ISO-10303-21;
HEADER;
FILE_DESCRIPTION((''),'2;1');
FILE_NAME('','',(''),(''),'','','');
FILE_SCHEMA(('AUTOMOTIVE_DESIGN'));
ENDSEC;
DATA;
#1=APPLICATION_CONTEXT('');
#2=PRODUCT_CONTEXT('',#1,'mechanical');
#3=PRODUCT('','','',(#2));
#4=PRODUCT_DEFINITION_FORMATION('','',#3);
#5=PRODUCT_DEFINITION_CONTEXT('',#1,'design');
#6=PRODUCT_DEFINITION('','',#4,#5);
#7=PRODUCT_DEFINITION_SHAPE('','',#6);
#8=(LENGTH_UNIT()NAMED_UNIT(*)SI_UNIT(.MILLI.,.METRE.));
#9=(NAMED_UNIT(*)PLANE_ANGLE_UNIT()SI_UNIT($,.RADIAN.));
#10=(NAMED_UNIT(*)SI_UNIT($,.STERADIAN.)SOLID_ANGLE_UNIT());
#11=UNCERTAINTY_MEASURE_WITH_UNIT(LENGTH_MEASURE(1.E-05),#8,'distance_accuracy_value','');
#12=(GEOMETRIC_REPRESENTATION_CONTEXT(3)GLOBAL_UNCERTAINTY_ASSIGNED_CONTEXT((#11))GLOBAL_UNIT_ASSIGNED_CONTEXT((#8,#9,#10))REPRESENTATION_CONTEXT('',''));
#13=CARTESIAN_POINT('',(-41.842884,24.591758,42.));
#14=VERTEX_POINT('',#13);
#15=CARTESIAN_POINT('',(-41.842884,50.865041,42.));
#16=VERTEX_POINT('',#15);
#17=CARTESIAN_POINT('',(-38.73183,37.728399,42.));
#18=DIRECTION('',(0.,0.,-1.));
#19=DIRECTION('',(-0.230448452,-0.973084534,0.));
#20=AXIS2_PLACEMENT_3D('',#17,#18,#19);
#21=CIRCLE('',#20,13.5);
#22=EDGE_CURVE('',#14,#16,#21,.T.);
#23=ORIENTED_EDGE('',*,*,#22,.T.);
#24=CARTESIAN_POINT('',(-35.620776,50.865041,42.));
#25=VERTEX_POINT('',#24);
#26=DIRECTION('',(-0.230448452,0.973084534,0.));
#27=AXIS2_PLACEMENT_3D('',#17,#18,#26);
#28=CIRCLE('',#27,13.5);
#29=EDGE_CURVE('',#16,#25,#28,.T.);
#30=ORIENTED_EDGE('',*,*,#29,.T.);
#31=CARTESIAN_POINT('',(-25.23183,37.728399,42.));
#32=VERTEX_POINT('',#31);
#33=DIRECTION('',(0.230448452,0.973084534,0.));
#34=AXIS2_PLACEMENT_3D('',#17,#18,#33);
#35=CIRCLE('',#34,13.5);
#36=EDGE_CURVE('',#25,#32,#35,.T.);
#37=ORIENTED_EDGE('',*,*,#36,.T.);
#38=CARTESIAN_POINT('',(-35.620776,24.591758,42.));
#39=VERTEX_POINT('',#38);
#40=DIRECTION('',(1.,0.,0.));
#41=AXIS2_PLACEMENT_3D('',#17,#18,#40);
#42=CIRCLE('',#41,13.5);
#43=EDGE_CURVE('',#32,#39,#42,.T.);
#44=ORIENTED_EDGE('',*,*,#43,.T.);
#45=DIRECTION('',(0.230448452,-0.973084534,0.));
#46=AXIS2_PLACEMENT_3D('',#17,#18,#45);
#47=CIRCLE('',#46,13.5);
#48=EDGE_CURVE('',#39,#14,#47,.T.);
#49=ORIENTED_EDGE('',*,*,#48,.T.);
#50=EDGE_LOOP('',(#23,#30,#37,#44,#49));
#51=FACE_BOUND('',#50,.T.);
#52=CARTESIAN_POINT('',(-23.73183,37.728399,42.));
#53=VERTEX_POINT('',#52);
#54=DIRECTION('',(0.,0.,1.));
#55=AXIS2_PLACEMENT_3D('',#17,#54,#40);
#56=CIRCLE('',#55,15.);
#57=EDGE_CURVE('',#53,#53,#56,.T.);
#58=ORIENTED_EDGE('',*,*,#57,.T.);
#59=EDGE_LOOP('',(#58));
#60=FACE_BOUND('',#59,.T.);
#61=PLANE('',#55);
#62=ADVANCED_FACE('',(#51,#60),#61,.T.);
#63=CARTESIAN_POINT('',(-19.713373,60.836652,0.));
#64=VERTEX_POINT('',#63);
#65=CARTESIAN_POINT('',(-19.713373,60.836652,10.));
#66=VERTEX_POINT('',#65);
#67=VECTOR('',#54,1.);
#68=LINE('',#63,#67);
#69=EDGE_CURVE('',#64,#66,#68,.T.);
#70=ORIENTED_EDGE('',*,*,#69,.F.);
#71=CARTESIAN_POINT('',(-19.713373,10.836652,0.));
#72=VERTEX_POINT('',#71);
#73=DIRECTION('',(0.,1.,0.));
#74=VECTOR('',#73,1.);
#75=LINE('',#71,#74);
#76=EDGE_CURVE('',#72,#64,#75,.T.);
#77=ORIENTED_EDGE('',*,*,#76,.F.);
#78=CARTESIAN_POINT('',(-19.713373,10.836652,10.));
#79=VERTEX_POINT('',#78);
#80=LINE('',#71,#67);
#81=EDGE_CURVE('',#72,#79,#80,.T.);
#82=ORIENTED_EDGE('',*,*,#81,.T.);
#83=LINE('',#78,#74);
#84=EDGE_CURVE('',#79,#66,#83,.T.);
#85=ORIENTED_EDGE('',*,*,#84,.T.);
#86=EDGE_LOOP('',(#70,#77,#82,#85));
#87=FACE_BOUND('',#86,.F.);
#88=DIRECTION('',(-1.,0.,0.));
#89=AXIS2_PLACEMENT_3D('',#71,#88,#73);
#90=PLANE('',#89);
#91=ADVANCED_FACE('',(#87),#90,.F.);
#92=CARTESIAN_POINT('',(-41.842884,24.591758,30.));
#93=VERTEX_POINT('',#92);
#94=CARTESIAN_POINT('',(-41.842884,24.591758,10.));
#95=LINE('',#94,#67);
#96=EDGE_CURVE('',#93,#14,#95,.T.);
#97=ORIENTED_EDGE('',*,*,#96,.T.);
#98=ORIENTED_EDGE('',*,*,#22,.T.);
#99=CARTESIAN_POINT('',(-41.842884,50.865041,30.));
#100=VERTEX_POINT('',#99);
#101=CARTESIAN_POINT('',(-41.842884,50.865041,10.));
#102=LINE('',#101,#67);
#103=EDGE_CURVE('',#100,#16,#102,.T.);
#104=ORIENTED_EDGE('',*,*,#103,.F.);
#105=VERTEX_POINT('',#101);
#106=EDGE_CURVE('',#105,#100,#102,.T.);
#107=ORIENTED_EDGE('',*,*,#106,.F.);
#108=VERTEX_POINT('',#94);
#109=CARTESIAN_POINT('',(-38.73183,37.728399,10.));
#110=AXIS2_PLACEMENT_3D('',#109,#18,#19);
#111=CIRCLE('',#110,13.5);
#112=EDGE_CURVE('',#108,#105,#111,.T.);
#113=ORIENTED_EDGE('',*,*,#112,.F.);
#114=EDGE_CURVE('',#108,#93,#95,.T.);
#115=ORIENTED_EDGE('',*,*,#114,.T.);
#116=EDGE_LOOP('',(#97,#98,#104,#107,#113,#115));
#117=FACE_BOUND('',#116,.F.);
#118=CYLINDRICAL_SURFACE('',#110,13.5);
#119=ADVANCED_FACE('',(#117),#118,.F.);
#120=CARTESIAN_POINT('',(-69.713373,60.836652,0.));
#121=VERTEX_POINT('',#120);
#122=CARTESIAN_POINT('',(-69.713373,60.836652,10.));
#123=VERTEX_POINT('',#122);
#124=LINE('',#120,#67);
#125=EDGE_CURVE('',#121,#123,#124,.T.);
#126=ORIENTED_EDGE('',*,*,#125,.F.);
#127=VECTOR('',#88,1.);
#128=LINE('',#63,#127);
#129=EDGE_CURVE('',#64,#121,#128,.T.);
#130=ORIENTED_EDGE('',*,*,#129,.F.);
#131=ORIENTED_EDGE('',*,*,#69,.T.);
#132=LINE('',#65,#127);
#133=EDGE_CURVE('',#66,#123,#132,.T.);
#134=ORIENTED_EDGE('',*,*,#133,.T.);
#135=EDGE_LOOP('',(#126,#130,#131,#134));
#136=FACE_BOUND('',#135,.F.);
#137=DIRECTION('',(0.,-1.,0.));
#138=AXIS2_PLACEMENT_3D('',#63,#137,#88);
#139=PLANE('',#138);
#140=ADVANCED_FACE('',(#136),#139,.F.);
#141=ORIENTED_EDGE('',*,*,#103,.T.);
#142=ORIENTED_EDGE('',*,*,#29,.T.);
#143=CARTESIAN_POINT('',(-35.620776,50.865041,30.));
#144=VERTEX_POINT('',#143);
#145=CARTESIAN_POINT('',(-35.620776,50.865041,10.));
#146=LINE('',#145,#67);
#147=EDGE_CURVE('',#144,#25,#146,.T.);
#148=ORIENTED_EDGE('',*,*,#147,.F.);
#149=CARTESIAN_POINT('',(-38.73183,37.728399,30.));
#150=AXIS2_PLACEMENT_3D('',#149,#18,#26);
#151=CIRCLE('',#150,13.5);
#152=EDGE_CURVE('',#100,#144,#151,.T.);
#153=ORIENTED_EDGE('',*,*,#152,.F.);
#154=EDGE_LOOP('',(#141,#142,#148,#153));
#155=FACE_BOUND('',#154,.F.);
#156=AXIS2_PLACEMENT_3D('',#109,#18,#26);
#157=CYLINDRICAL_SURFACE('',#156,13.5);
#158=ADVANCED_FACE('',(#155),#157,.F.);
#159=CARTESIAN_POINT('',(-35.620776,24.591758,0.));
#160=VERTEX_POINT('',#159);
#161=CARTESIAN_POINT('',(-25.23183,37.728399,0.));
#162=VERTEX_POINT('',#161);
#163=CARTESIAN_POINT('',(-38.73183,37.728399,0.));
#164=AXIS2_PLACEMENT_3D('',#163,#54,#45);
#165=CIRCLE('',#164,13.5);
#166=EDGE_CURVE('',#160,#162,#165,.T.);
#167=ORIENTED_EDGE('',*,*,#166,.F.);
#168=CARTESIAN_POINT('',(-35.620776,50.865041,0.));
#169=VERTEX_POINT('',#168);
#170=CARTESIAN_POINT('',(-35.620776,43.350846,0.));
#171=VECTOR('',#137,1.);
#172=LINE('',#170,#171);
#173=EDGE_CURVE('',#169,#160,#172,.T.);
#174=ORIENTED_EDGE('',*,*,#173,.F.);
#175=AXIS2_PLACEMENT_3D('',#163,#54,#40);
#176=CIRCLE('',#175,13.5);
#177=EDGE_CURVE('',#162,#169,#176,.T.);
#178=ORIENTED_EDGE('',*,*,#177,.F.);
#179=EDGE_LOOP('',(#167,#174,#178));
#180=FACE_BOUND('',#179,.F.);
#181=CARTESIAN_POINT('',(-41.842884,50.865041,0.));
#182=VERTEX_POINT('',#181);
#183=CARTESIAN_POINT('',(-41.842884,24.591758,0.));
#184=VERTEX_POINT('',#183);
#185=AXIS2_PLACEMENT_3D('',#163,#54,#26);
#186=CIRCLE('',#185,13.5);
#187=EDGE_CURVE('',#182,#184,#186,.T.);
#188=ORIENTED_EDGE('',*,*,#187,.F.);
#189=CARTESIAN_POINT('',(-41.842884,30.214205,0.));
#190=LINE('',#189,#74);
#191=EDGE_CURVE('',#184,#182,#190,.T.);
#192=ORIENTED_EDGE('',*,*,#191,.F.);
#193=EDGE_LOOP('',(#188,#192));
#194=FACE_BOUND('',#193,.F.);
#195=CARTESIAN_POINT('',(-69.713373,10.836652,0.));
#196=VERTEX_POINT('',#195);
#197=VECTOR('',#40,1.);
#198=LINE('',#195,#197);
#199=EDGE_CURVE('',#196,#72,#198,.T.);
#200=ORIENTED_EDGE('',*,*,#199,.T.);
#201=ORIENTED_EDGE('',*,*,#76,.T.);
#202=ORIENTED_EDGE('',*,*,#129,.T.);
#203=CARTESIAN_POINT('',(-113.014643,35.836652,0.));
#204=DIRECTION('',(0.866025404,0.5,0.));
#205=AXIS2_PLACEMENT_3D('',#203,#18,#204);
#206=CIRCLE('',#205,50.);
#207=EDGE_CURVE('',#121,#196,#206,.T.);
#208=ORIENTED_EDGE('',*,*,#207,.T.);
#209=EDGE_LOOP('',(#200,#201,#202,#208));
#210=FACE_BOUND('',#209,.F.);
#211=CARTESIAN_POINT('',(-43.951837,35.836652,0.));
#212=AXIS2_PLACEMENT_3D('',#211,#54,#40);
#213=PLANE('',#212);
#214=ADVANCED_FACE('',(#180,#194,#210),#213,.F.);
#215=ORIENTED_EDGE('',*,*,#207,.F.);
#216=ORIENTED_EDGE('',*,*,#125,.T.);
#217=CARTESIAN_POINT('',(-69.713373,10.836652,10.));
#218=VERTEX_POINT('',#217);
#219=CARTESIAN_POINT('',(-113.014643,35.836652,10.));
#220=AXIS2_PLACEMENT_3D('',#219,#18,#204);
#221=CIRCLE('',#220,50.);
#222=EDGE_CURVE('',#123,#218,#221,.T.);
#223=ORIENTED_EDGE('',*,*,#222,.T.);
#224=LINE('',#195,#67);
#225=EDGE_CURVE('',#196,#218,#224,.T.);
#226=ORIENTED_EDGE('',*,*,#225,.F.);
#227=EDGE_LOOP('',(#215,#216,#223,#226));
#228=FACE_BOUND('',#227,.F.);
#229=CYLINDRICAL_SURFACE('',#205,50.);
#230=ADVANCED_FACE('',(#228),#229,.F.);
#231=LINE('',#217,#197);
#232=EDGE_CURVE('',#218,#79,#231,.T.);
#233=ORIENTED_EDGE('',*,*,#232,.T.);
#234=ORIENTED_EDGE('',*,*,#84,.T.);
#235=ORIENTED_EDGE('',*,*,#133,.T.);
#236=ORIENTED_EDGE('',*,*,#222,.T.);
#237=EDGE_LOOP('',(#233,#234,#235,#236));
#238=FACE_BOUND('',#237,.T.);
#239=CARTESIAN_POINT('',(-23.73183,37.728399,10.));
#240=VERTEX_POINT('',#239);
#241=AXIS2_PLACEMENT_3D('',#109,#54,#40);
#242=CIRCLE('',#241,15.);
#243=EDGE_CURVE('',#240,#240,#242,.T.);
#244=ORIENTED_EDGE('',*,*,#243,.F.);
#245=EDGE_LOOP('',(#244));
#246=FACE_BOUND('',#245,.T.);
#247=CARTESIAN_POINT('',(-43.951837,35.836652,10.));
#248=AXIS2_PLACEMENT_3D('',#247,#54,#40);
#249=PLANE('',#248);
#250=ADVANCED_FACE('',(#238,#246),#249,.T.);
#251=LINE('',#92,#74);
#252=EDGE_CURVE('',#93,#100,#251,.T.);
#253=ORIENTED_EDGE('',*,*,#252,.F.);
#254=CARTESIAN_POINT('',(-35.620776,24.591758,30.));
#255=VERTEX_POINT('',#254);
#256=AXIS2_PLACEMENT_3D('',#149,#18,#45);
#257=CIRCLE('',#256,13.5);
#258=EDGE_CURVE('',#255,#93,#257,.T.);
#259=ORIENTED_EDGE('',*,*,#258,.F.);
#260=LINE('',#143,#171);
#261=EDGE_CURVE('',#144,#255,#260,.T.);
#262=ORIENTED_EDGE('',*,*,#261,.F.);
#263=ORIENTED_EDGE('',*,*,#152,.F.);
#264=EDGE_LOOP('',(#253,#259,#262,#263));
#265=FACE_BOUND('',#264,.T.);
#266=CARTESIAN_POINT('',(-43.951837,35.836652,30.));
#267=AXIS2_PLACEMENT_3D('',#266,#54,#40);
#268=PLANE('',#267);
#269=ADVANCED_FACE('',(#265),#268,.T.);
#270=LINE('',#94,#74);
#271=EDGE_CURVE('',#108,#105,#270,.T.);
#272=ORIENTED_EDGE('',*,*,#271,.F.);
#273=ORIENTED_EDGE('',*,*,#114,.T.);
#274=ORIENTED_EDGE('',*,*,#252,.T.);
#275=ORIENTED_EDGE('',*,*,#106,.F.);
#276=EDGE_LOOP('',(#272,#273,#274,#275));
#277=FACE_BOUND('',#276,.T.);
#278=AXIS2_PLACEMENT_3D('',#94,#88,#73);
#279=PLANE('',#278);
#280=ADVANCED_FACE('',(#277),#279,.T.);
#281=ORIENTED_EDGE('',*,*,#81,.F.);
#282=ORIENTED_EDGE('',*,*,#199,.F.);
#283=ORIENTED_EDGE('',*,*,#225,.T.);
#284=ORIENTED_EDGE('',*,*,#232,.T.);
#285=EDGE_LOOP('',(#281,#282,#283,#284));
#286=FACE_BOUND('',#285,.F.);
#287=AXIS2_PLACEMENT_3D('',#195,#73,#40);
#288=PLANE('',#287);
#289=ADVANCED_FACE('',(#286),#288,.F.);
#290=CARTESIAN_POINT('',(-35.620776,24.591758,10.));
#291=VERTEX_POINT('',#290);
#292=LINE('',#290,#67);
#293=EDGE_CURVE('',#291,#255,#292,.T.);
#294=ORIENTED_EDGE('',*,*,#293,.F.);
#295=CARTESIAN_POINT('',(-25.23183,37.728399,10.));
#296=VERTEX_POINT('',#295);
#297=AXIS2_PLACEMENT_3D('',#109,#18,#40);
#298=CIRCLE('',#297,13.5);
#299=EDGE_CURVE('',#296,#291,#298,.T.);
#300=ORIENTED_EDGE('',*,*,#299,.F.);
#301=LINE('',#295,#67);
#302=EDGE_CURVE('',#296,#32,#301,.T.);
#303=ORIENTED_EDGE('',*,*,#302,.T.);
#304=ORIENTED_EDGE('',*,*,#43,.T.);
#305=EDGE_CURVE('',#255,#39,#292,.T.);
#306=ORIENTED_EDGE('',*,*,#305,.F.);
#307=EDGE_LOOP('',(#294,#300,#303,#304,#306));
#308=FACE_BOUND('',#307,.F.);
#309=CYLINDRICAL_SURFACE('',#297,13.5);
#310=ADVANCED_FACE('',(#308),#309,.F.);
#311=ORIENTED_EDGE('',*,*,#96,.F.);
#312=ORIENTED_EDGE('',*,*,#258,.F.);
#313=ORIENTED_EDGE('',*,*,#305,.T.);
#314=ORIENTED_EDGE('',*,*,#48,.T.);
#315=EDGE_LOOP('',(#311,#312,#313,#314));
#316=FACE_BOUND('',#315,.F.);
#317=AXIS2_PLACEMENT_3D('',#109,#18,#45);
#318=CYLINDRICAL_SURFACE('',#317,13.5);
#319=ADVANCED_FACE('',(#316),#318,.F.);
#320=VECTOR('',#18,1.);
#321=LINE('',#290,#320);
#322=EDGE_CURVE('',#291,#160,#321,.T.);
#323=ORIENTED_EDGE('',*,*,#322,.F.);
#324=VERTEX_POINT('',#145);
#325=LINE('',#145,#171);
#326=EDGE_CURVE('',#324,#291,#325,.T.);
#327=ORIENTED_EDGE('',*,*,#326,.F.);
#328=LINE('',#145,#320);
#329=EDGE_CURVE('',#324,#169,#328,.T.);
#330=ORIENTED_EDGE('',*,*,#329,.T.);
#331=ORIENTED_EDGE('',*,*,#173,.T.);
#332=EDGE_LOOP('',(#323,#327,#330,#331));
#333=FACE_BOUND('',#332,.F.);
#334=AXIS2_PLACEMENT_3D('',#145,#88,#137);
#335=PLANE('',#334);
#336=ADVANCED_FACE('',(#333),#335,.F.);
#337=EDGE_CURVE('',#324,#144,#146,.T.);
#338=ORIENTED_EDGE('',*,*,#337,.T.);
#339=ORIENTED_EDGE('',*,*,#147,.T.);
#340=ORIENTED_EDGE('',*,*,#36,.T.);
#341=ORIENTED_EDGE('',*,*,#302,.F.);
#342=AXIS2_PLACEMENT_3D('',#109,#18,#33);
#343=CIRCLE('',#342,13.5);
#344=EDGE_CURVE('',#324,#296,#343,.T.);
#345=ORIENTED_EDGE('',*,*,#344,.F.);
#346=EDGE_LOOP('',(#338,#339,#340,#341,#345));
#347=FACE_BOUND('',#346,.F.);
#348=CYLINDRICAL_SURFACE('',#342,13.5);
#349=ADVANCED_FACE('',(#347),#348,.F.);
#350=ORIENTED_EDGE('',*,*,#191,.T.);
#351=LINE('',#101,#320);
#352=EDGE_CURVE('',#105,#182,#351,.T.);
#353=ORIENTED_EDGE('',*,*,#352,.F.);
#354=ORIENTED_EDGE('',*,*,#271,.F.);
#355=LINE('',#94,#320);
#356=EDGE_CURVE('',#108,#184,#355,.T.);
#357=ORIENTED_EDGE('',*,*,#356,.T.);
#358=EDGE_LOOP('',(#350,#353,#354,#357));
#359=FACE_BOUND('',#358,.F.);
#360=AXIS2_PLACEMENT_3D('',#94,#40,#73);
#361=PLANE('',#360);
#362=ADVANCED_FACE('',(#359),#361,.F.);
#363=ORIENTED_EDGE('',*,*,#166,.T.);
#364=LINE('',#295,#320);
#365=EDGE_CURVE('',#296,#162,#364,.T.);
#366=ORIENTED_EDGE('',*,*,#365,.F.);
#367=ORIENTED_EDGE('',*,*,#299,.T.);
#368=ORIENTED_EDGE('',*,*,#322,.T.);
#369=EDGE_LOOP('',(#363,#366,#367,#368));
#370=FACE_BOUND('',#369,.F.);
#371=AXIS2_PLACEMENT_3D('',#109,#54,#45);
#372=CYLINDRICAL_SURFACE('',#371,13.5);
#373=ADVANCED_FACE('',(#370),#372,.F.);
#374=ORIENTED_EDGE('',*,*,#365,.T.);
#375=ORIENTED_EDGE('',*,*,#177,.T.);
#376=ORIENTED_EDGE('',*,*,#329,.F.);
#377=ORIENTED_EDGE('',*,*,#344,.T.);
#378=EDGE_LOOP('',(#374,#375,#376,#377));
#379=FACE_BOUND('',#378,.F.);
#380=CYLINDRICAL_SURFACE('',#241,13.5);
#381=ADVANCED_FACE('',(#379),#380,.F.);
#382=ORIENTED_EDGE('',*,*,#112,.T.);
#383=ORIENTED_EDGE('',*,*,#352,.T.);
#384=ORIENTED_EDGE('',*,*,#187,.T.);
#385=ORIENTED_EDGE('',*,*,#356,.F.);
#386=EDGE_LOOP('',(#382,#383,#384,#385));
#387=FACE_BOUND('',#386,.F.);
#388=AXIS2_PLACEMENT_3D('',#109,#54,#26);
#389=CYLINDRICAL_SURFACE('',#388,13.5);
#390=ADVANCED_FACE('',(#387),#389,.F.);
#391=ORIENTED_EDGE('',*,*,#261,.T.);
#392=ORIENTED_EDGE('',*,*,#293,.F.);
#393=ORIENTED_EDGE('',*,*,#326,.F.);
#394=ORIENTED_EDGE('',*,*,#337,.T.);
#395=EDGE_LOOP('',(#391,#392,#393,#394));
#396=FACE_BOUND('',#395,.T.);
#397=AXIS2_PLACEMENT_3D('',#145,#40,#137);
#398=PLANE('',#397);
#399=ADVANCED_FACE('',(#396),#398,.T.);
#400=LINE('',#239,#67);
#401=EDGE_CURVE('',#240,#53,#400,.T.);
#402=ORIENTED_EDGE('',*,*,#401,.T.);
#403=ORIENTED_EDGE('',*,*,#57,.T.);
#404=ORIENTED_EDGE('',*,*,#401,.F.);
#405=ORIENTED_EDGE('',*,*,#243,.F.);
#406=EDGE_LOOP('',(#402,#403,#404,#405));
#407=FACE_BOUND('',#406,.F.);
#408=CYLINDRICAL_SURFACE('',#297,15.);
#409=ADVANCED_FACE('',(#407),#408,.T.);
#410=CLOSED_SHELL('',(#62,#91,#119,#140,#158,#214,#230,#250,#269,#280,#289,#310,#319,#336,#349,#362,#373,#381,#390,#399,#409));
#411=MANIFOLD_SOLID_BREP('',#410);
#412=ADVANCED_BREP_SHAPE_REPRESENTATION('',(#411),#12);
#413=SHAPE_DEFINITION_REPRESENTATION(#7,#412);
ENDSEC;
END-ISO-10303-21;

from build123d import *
from build123d import SkipClean  # not in build123d's __all__

# Parameters (mm, degrees)
F1_DEPTH = 10
F2_R     = 15
F3_DEPTH = 32
F4_DEPTH = 25
F5_DEPTH = 20


with BuildPart() as f1:
    # F0 (on Top) → F1 (new body)
    with BuildSketch(Plane.XY):
        with BuildLine():
            Line((-19.7133726581, 60.8366520235), (-69.7133726581, 60.8366520235))
            ThreePointArc((-69.7133726581, 60.8366520235), (-63.0146428473, 35.8366520235), (-69.7133726581, 10.8366520235))
            Line((-69.7133726581, 10.8366520235), (-19.7133726581, 10.8366520235))
            Line((-19.7133726581, 10.8366520235), (-19.7133726581, 60.8366520235))
        make_face()
    extrude(amount=F1_DEPTH)

    # F2 (on face) → F3 (join)
    with BuildSketch(Plane.XY.offset(10)):
        with Locations((-38.7318296711, 37.7283993232)):
            Circle(F2_R)
        with BuildLine():
            ThreePointArc((-35.6207755692, 50.8650405369), (-28.1429385494, 46.1024894119), (-25.2318296711, 37.7283993232))
            ThreePointArc((-25.2318296711, 37.7283993232), (-28.1429385494, 29.3543092346), (-35.6207755692, 24.5917581096))
            ThreePointArc((-35.6207755692, 24.5917581096), (-38.7318296711, 24.2283993232), (-41.8428837729, 24.5917581096))
            ThreePointArc((-41.8428837729, 24.5917581096), (-52.2318296711, 37.7283993232), (-41.8428837729, 50.8650405369))
            ThreePointArc((-41.8428837729, 50.8650405369), (-38.7318296711, 51.2283993232), (-35.6207755692, 50.8650405369))
        make_face(mode=Mode.SUBTRACT)
    extrude(amount=F3_DEPTH)

    # F2 (on face) → F4 (cut)
    with BuildSketch(Plane.XY.offset(10)):
        with BuildLine():
            Line((-41.8428837729, 24.5917581096), (-41.8428837729, 50.8650405369))
            ThreePointArc((-41.8428837729, 50.8650405369), (-52.2318296711, 37.7283993232), (-41.8428837729, 24.5917581096))
        make_face()
        with BuildLine():
            ThreePointArc((-35.6207755692, 24.5917581096), (-28.1429385494, 29.3543092346), (-25.2318296711, 37.7283993232))
            ThreePointArc((-25.2318296711, 37.7283993232), (-28.1429385494, 46.1024894119), (-35.6207755692, 50.8650405369))
            Line((-35.6207755692, 50.8650405369), (-35.6207755692, 24.5917581096))
        make_face()
    with SkipClean():  # cleaning this boolean's faces spoils the solid; the shape is the same uncleaned
        extrude(amount=-F4_DEPTH, mode=Mode.SUBTRACT)

    # F5 (add): a face of the model
    f5_faces = [f1.faces().sort_by_distance(p)[0] for p in [
        (-38.7318296711, 37.7283993232, 10),
    ]]
    with SkipClean():  # cleaning this boolean's faces spoils the solid; the shape is the same uncleaned
        extrude(f5_faces, amount=F5_DEPTH)


solid = f1.part
